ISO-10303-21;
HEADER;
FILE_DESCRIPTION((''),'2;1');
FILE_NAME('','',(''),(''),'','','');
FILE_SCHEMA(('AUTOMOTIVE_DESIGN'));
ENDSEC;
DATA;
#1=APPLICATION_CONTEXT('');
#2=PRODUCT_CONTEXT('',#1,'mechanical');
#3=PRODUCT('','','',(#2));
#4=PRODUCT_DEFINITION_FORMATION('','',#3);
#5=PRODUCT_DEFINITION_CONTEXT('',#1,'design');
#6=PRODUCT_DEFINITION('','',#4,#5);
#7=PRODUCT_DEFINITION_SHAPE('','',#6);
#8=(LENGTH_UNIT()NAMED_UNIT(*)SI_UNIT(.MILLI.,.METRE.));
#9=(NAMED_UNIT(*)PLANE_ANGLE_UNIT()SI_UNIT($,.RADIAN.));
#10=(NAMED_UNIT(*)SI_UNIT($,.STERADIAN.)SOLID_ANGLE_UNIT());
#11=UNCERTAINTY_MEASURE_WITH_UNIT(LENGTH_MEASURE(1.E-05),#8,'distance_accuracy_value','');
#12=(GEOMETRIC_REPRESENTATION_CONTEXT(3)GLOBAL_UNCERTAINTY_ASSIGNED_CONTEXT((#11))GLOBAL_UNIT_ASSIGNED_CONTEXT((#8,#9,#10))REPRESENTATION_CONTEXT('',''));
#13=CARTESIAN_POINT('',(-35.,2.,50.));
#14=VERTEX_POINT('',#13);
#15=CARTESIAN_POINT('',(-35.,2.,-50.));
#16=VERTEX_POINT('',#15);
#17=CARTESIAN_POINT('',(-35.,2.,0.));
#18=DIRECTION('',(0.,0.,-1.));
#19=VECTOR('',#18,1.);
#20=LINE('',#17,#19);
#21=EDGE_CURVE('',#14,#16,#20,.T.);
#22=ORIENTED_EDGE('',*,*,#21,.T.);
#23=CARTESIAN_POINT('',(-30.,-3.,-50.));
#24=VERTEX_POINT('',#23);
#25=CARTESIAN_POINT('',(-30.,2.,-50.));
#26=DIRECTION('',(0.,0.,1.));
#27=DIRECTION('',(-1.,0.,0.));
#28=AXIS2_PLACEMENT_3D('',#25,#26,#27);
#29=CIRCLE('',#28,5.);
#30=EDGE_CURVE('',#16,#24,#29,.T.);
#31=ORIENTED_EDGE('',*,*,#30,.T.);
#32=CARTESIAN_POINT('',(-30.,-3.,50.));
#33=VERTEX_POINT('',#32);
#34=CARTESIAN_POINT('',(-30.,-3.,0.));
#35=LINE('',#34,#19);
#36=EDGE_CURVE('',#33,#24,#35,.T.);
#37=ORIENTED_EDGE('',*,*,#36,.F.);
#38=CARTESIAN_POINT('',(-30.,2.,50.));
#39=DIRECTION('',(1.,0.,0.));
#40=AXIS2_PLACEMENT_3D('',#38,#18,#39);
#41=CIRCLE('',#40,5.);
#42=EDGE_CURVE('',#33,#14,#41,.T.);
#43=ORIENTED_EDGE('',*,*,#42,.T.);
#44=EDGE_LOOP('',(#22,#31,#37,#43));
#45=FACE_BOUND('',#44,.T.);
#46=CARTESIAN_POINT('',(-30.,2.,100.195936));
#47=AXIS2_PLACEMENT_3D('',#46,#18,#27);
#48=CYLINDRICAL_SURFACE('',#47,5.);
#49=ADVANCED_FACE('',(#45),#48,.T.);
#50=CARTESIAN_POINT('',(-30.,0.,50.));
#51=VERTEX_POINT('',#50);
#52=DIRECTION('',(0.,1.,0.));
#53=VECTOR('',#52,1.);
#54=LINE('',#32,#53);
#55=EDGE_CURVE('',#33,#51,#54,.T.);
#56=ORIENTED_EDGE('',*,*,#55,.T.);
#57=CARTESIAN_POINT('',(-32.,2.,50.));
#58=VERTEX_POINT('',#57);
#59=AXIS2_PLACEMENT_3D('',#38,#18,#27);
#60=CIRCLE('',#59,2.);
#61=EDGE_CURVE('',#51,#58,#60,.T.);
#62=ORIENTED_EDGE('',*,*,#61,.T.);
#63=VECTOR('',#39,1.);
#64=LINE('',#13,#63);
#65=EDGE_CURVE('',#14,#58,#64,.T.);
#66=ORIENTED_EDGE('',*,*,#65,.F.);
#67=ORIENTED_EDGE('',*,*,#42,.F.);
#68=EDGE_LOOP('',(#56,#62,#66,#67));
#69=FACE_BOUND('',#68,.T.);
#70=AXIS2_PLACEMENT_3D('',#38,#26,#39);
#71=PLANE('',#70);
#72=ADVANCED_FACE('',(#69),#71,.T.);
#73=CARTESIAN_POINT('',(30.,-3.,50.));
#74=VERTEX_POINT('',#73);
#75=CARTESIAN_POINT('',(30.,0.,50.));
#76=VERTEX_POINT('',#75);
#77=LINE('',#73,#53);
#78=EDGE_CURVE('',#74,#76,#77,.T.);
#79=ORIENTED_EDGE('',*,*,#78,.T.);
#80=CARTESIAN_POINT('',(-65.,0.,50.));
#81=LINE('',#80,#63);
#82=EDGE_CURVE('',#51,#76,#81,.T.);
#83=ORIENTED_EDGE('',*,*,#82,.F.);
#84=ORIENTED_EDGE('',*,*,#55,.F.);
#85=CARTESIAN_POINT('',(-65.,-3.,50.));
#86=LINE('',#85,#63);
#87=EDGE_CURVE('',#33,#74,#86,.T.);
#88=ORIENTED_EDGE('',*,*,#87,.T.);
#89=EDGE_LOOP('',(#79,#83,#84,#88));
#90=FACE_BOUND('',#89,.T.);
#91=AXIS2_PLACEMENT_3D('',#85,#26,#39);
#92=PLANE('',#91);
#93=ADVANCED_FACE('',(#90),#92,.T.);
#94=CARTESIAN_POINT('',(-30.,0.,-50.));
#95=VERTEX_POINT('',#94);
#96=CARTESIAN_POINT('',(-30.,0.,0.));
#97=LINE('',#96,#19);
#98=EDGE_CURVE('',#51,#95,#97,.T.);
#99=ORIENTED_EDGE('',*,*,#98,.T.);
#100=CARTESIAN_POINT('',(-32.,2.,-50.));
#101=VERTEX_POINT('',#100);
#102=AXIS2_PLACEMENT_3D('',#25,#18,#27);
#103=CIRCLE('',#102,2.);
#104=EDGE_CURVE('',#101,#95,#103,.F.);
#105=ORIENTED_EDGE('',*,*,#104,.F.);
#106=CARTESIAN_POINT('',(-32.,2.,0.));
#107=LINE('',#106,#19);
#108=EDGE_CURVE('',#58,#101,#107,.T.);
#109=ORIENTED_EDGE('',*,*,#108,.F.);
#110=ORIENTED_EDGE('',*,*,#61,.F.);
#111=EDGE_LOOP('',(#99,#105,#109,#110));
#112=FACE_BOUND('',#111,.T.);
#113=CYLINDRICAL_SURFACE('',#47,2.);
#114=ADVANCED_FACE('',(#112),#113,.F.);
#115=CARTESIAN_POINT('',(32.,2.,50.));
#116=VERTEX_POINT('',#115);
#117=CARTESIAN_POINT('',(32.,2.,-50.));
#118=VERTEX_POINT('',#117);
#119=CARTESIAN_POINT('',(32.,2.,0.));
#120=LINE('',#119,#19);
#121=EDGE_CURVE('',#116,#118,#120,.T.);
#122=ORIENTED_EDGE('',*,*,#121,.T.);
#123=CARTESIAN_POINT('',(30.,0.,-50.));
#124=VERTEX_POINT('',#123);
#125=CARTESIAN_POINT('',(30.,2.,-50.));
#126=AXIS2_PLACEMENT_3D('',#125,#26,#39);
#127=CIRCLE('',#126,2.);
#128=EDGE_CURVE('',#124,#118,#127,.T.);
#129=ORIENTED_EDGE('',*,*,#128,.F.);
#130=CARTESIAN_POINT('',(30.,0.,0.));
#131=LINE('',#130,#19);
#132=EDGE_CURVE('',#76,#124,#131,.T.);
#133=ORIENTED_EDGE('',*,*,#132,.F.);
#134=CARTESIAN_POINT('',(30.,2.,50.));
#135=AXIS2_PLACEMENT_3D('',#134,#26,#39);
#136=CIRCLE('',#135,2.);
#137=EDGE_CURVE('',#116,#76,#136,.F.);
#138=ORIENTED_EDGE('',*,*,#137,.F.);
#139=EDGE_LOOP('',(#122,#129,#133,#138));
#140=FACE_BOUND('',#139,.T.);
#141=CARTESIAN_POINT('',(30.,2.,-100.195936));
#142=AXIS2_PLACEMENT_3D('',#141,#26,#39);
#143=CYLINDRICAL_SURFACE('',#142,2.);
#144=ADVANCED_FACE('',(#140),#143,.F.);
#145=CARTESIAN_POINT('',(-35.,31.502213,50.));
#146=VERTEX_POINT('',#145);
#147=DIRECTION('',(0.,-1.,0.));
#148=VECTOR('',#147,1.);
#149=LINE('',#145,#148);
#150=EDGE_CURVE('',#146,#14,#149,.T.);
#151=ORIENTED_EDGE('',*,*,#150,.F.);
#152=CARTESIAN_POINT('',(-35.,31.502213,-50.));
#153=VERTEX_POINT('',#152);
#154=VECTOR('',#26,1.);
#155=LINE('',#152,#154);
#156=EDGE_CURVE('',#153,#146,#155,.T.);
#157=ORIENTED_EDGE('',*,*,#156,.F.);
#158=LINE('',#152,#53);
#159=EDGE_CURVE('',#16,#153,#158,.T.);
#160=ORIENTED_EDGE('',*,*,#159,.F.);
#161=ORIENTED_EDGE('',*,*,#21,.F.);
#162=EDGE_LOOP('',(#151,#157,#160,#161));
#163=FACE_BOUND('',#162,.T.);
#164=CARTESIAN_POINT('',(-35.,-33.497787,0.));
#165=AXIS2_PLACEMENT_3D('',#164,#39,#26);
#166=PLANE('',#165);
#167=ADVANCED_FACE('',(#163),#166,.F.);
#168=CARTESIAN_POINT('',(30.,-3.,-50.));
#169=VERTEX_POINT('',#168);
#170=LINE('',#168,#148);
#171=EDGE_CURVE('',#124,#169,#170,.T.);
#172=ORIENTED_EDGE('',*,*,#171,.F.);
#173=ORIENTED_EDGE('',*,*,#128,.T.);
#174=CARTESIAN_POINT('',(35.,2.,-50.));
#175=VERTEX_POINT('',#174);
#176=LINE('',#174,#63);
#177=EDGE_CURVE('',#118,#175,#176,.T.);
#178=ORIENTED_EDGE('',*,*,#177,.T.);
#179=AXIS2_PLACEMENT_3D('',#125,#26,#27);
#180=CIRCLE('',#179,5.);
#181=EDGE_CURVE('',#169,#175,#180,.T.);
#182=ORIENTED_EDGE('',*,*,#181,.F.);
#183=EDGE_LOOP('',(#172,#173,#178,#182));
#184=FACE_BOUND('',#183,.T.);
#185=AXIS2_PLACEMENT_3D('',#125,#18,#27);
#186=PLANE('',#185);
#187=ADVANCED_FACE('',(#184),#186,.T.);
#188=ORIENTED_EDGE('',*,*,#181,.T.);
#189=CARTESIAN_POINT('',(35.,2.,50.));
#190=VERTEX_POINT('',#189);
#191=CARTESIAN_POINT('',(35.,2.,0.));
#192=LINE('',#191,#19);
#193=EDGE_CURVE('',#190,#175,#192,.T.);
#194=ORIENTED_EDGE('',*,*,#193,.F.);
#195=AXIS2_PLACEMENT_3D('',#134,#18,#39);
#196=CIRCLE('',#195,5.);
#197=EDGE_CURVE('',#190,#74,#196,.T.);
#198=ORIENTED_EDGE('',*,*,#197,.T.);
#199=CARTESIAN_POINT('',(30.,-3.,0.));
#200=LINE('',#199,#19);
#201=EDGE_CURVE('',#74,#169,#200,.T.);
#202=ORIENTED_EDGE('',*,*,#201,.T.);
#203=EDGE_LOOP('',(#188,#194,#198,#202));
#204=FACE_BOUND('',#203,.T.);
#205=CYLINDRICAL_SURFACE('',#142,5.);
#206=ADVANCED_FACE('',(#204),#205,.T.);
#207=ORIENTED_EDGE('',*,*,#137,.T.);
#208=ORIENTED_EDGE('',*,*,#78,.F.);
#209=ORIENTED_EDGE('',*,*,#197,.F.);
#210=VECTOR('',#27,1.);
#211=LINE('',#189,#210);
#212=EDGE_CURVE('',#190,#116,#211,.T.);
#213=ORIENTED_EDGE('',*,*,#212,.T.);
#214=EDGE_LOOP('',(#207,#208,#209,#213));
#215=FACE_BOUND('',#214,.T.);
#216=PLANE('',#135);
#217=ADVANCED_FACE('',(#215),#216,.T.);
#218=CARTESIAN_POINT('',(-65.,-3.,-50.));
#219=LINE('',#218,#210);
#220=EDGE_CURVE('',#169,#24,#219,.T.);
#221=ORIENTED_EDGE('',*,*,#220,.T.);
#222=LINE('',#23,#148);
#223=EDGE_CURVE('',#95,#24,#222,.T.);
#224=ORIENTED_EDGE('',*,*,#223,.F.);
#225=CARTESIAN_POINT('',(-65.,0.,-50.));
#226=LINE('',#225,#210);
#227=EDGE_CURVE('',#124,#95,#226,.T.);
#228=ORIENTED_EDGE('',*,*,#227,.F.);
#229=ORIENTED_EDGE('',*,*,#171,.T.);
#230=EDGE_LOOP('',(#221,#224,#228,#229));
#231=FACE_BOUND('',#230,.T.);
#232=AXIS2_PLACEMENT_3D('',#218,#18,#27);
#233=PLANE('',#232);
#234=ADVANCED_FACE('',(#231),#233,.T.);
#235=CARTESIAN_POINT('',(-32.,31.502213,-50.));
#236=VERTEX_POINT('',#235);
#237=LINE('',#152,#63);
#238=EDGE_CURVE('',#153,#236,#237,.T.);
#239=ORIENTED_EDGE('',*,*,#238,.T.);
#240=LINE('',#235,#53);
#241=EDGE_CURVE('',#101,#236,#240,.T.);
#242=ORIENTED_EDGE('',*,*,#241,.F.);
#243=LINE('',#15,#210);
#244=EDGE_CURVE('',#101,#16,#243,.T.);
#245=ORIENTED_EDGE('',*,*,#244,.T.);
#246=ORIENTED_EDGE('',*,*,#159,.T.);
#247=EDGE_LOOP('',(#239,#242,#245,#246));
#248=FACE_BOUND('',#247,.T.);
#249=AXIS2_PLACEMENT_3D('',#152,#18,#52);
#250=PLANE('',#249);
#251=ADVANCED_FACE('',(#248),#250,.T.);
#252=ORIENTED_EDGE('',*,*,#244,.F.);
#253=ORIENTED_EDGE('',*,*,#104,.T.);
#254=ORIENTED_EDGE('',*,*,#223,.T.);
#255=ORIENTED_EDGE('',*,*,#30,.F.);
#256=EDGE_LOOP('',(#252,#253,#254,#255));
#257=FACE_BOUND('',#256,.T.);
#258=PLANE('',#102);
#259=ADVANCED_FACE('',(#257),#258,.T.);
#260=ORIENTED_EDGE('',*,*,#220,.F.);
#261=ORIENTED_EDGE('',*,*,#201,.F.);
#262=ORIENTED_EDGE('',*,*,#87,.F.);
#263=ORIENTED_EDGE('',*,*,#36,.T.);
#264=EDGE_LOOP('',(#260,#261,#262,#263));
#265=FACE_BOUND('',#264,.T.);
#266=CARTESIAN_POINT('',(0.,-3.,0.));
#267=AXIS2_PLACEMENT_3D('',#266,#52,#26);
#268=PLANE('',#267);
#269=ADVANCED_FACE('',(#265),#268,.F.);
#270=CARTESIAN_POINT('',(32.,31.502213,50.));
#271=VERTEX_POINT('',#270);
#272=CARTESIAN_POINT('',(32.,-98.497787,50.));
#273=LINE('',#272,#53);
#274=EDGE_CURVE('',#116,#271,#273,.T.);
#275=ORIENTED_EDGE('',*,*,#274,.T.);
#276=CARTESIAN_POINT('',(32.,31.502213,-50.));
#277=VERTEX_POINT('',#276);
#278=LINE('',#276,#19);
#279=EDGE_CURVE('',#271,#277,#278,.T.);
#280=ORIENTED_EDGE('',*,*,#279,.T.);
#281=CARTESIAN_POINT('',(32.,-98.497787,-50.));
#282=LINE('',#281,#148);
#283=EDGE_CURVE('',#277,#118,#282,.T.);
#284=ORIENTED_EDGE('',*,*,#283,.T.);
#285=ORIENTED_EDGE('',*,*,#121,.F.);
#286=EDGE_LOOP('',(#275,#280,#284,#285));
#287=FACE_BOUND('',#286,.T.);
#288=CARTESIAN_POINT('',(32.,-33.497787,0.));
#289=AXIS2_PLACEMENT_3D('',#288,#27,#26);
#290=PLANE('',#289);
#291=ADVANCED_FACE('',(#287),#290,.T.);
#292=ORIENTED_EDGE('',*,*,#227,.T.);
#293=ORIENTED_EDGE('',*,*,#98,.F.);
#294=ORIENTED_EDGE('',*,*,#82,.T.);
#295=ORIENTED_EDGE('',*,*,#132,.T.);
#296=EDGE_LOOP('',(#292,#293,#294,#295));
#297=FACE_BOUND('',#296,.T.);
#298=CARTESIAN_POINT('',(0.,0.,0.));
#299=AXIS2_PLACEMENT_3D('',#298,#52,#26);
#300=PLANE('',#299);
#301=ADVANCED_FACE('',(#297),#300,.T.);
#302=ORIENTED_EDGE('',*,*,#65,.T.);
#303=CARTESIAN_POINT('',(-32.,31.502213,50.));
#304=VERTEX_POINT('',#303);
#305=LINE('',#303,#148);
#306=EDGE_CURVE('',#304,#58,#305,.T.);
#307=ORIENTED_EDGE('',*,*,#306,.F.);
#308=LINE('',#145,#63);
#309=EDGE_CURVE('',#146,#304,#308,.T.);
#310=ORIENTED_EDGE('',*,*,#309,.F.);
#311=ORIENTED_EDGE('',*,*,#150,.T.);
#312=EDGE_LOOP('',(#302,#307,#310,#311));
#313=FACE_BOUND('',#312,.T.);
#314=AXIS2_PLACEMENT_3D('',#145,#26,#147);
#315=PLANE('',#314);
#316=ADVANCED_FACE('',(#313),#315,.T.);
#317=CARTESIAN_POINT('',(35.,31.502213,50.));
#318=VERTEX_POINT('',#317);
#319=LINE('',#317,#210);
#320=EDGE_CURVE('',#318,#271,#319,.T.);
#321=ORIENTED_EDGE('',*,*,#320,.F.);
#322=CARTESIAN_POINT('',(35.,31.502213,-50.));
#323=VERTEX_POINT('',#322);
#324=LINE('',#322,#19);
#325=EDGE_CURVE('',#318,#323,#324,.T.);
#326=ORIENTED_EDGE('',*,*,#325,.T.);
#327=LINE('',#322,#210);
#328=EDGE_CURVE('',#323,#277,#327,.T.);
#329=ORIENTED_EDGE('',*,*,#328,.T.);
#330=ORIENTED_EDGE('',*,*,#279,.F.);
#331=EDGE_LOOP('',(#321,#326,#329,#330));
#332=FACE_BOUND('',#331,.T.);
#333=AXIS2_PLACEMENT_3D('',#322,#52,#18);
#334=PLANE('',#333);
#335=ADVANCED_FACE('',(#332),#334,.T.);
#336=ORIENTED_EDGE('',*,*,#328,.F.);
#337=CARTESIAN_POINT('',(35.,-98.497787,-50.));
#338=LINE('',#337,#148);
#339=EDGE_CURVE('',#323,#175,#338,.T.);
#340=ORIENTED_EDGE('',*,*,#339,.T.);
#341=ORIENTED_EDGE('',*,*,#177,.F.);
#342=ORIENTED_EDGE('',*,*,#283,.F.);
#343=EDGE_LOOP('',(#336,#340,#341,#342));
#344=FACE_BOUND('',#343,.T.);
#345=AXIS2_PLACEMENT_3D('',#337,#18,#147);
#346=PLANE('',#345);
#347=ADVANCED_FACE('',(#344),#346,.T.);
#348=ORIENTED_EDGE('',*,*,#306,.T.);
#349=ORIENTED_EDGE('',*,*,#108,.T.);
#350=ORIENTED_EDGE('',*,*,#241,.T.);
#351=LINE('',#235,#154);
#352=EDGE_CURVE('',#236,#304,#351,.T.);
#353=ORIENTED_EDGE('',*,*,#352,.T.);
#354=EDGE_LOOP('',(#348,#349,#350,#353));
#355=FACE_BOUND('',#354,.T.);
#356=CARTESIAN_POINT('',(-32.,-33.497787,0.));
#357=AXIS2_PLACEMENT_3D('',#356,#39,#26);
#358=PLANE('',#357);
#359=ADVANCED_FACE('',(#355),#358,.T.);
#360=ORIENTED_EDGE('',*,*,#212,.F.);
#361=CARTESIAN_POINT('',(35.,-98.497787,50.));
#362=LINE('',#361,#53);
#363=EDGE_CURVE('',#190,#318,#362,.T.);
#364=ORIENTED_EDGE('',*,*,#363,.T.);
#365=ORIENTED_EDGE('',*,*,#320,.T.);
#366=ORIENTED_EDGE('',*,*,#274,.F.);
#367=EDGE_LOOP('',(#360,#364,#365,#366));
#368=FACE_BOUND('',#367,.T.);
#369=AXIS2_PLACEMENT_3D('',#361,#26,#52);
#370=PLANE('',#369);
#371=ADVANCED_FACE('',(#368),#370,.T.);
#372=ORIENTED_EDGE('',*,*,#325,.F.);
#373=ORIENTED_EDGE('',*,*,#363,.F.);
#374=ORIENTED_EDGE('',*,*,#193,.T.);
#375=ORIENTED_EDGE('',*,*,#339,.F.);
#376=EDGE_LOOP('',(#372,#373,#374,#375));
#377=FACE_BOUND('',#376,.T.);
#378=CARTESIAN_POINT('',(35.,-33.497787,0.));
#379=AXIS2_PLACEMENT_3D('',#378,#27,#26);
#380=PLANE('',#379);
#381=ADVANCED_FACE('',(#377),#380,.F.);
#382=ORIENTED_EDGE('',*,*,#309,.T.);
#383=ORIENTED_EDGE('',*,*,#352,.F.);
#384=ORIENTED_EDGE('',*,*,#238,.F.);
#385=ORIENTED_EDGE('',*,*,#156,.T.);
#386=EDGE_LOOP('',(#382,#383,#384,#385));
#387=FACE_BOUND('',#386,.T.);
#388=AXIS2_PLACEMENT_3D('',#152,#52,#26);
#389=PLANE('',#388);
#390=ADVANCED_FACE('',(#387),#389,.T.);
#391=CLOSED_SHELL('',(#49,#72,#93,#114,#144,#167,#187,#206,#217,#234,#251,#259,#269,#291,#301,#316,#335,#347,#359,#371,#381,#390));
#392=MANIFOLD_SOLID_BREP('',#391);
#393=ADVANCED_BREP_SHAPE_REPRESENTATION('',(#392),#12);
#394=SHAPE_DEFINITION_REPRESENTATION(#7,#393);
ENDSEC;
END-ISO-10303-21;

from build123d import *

# Parameters (mm, degrees)
SKETCH1_W              = 130
SKETCH1_H              = 100
BASE_FLANGE1_DEPTH     = 3
SKETCHED_START         = -50
SKETCHED_BEND1_DEPTH   = 100
SKETCHED_BEND1_2_DEPTH = 100


# Read off the part's stored shape, not the designer's step: Sketched Bend1
# Sheet-metal steps are written as plain solids
with BuildPart() as part:
    # Sketch1 → Base-Flange1 (new body)
    with BuildSketch(Plane(origin=(0, 0, 0), x_dir=(1, 0, 0), z_dir=(0, 1, 0))):
        Rectangle(SKETCH1_W, SKETCH1_H)
    extrude(amount=-BASE_FLANGE1_DEPTH)

    # Sketched Bend1 outline → Sketched Bend1 (cut)
    with BuildSketch(Plane.XY.offset(SKETCHED_START)):
        with BuildLine():
            Line((-65, -3), (-30, -3))
            ThreePointArc((-30, -3), (-32.738612788, -2.183300133), (-34.582575695, 0))
            Line((-34.582575695, 0), (-65, 0))
            Line((-65, 0), (-65, -3))
        make_face()
        with BuildLine():
            ThreePointArc((34.582575695, 0), (32.738612788, -2.183300133), (30, -3))
            Line((30, -3), (65, -3))
            Line((65, -3), (65, 0))
            Line((65, 0), (34.582575695, 0))
        make_face()
    extrude(amount=SKETCHED_BEND1_DEPTH, mode=Mode.SUBTRACT)

    # Sketched Bend1 2 outline → Sketched Bend1 2 (add)
    with BuildSketch(Plane.XY.offset(SKETCHED_START)):
        with BuildLine():
            ThreePointArc((-35, 2), (-34.894531565, 0.978451782), (-34.582575695, 0))
            Line((-34.582575695, 0), (-30, 0))
            ThreePointArc((-30, 0), (-31.414213562, 0.585786438), (-32, 2))
            Line((-32, 2), (-32, 31.502212856))
            Line((-32, 31.502212856), (-35, 31.502212856))
            Line((-35, 31.502212856), (-35, 2))
        make_face()
        with BuildLine():
            Line((30, 0), (34.582575695, 0))
            ThreePointArc((34.582575695, 0), (34.894531565, 0.978451782), (35, 2))
            Line((35, 2), (35, 31.502212856))
            Line((35, 31.502212856), (32, 31.502212856))
            Line((32, 31.502212856), (32, 2))
            ThreePointArc((32, 2), (31.414213562, 0.585786438), (30, 0))
        make_face()
    extrude(amount=SKETCHED_BEND1_2_DEPTH)


solid = part.part
